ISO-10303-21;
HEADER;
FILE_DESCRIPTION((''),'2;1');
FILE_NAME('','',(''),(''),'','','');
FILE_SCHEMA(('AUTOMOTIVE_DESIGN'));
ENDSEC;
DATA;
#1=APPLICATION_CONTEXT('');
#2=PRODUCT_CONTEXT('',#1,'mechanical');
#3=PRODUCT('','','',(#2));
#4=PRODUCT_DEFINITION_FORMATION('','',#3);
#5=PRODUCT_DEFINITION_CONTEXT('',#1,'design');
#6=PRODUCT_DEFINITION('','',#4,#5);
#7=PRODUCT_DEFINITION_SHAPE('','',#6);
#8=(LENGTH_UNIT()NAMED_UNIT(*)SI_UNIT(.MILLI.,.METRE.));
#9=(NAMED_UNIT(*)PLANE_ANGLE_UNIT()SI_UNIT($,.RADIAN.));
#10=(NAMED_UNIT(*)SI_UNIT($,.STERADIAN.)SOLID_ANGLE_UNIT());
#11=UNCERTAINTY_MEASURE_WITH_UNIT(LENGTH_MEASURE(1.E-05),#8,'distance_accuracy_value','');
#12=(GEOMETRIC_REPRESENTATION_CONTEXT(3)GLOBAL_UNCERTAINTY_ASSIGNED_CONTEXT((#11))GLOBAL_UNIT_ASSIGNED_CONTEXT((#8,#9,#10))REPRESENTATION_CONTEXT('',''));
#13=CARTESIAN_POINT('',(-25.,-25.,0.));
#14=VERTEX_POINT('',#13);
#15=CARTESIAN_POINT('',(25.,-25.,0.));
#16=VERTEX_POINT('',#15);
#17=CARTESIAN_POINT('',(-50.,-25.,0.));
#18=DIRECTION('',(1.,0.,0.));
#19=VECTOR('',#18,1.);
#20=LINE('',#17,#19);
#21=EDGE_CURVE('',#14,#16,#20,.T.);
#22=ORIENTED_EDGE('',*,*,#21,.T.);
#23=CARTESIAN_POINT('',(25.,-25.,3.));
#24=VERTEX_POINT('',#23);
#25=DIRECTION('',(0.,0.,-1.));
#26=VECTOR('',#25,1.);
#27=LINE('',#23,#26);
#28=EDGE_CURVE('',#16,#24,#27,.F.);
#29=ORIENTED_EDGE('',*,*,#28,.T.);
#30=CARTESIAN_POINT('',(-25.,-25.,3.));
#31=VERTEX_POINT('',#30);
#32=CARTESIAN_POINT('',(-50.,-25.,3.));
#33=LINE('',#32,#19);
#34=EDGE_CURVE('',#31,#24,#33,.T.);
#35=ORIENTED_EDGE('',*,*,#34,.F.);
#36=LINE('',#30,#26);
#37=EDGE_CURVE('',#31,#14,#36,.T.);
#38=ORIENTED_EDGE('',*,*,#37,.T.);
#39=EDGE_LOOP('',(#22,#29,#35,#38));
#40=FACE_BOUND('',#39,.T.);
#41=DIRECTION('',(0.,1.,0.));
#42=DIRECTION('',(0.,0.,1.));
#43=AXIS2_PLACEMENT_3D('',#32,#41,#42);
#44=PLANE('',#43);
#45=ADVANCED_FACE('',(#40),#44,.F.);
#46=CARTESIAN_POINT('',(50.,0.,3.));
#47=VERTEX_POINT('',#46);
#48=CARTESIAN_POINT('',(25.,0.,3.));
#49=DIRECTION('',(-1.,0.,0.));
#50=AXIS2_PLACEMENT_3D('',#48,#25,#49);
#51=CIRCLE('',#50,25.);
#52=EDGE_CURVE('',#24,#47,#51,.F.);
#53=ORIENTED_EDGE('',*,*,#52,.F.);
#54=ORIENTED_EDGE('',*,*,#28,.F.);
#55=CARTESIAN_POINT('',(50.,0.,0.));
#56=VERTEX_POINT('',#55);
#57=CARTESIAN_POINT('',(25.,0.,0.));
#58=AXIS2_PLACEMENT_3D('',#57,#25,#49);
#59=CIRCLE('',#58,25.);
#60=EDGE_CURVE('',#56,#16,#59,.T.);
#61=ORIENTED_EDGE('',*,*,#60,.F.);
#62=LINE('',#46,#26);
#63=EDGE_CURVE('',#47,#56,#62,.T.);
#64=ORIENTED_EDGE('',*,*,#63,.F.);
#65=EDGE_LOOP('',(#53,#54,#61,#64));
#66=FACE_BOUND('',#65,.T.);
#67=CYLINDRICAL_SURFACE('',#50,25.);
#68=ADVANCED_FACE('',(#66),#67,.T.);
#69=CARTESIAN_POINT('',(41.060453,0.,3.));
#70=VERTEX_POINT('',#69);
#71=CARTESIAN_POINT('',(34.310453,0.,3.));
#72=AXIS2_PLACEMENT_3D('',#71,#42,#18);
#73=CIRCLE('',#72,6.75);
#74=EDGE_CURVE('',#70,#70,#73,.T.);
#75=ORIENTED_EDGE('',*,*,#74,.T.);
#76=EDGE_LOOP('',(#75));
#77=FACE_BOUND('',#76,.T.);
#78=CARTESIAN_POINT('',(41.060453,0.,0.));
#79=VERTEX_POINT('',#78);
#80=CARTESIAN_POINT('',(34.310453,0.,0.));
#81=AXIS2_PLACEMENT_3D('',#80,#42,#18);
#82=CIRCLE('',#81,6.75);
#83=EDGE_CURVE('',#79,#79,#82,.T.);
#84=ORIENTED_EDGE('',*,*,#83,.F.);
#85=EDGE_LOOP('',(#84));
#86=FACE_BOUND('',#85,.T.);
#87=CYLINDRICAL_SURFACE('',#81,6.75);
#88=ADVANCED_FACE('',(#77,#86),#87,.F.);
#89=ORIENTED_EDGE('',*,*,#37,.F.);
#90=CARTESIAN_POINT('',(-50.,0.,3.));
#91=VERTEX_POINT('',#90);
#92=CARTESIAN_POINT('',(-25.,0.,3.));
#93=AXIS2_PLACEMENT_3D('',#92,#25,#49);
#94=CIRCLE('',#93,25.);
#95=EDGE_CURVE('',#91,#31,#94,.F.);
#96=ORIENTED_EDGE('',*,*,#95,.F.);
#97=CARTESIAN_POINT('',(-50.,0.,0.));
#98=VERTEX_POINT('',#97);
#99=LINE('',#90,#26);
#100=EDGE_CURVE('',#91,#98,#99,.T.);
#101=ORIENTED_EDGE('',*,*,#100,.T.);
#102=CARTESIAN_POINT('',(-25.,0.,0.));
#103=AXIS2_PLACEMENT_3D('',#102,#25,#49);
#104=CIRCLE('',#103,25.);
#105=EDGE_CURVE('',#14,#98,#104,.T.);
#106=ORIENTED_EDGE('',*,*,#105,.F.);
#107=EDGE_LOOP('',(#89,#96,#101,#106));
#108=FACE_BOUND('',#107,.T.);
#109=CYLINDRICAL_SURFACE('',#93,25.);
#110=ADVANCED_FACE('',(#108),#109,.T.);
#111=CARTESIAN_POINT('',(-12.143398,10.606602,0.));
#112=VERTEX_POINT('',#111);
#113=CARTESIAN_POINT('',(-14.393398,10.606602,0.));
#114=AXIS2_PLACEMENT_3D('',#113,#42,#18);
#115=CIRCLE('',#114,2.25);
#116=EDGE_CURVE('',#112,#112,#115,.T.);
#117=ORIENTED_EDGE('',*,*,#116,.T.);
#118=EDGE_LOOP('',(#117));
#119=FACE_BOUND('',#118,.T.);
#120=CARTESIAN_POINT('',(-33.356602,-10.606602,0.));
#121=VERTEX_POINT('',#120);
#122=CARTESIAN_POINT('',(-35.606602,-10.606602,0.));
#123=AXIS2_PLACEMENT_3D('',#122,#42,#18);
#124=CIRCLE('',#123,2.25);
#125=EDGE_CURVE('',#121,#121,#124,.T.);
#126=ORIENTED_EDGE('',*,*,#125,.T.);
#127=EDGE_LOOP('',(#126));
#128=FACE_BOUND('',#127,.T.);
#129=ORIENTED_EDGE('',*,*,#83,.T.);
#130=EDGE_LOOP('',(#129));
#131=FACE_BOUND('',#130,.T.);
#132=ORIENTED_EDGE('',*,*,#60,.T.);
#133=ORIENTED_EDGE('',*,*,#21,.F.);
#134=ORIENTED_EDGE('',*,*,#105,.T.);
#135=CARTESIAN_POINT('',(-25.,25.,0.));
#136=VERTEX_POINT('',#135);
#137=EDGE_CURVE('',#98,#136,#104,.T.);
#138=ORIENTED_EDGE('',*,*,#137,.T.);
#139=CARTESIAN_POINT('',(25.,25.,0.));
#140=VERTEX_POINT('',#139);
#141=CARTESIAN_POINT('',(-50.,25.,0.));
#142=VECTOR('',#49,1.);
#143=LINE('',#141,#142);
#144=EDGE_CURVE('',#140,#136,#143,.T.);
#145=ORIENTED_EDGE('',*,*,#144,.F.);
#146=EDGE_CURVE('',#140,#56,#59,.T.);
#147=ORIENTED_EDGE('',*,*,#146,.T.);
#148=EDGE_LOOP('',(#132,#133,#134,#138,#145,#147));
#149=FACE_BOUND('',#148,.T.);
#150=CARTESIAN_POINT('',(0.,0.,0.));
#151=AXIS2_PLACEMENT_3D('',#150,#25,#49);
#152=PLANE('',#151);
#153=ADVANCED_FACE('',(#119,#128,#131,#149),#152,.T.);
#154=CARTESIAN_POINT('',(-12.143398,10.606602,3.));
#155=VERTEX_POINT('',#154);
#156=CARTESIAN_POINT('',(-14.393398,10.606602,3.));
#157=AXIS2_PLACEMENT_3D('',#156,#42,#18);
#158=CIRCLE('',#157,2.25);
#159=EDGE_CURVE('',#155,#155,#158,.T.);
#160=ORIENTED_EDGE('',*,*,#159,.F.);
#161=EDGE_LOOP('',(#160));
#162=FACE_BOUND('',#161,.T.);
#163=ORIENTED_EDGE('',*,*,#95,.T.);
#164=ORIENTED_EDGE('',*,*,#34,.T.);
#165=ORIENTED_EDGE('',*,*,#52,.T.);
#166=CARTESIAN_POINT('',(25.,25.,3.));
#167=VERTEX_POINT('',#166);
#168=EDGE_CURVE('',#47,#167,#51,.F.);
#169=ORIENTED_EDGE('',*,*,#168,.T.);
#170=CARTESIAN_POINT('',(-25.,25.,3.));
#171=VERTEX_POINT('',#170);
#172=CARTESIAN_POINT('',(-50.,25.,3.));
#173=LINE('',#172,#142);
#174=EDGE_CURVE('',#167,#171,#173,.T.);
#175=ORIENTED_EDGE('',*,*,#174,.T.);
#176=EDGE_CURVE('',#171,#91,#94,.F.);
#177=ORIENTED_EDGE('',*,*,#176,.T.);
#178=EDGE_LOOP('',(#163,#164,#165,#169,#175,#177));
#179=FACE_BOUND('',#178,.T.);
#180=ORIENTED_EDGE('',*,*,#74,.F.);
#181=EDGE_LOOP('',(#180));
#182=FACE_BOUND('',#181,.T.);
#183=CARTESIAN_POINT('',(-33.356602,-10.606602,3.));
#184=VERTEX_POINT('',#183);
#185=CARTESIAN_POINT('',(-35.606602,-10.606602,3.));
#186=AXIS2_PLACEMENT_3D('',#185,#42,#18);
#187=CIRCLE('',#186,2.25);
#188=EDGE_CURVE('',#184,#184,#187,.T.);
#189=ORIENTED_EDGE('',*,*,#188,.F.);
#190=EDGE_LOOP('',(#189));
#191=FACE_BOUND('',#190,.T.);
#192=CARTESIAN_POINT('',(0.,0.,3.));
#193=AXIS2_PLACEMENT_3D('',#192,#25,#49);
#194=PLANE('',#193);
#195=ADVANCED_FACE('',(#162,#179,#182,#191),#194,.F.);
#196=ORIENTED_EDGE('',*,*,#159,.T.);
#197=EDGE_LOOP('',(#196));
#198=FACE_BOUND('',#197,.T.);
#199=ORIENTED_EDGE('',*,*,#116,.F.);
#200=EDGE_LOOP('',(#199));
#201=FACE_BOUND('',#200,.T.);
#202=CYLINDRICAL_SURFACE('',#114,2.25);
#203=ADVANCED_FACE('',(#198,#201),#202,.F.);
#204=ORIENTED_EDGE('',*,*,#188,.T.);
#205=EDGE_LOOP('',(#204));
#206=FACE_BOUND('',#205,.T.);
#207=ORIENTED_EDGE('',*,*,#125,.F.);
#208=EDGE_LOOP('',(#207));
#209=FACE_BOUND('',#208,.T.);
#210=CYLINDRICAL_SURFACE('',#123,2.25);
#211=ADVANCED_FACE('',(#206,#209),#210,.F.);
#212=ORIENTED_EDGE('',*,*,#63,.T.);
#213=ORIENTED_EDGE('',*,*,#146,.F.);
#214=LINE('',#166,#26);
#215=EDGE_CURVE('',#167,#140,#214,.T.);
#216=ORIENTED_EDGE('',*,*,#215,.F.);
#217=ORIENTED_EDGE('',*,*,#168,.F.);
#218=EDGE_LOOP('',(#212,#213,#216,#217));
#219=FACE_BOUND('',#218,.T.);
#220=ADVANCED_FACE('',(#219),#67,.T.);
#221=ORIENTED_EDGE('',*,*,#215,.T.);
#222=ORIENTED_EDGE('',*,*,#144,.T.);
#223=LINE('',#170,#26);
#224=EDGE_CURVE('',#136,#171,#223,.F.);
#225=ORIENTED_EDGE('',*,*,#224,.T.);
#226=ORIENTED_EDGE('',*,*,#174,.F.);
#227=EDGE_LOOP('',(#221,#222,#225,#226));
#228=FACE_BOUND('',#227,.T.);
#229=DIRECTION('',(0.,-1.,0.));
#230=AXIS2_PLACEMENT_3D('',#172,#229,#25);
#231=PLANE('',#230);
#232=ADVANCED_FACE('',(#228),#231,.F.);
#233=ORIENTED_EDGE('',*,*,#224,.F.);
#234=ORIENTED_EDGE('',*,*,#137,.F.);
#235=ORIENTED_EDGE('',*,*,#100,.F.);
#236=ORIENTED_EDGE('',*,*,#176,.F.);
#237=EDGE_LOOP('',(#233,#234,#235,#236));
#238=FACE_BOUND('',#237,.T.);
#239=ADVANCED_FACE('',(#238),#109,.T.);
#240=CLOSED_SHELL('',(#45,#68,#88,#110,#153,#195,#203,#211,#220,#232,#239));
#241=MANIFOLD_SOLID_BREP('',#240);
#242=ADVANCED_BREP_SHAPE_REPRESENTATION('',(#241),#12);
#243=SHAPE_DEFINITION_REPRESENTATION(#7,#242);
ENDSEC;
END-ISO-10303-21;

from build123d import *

# Parameters (mm, degrees)
SKETCH1_W           = 100
SKETCH1_H           = 50
BOSS_EXTRUDE1_DEPTH = 3
SKETCH2_R           = 6.75
SKETCH2_R_2         = 2.25
CUT_EXTRUDE1_DEPTH  = 56.982140009
FILLET1_R           = 25


with BuildPart() as part:
    # Sketch1 → Boss-Extrude1 (new body)
    with BuildSketch(Plane.XY):
        Rectangle(SKETCH1_W, SKETCH1_H)
    extrude(amount=BOSS_EXTRUDE1_DEPTH)

    # Sketch2 → Cut-Extrude1 (cut, through all)
    with BuildSketch(Plane.XY.offset(3)):
        with Locations((34.310453011, 0)):
            Circle(SKETCH2_R)
        with Locations((-14.393398282, 10.606601718)):
            Circle(SKETCH2_R_2)
        with Locations((-35.606601718, -10.606601718)):
            Circle(SKETCH2_R_2)
    extrude(amount=-CUT_EXTRUDE1_DEPTH, mode=Mode.SUBTRACT)

    # Fillet1
    fillet1_edges = [part.edges().sort_by_distance(p)[0] for p in [
        (-50, -25, 1.5),
        (-50, 25, 1.5),
        (50, 25, 1.5),
        (50, -25, 1.5),
    ]]
    fillet(fillet1_edges, radius=FILLET1_R - 0.0001)  # a hair under: the kernel refuses the full size


solid = part.part
